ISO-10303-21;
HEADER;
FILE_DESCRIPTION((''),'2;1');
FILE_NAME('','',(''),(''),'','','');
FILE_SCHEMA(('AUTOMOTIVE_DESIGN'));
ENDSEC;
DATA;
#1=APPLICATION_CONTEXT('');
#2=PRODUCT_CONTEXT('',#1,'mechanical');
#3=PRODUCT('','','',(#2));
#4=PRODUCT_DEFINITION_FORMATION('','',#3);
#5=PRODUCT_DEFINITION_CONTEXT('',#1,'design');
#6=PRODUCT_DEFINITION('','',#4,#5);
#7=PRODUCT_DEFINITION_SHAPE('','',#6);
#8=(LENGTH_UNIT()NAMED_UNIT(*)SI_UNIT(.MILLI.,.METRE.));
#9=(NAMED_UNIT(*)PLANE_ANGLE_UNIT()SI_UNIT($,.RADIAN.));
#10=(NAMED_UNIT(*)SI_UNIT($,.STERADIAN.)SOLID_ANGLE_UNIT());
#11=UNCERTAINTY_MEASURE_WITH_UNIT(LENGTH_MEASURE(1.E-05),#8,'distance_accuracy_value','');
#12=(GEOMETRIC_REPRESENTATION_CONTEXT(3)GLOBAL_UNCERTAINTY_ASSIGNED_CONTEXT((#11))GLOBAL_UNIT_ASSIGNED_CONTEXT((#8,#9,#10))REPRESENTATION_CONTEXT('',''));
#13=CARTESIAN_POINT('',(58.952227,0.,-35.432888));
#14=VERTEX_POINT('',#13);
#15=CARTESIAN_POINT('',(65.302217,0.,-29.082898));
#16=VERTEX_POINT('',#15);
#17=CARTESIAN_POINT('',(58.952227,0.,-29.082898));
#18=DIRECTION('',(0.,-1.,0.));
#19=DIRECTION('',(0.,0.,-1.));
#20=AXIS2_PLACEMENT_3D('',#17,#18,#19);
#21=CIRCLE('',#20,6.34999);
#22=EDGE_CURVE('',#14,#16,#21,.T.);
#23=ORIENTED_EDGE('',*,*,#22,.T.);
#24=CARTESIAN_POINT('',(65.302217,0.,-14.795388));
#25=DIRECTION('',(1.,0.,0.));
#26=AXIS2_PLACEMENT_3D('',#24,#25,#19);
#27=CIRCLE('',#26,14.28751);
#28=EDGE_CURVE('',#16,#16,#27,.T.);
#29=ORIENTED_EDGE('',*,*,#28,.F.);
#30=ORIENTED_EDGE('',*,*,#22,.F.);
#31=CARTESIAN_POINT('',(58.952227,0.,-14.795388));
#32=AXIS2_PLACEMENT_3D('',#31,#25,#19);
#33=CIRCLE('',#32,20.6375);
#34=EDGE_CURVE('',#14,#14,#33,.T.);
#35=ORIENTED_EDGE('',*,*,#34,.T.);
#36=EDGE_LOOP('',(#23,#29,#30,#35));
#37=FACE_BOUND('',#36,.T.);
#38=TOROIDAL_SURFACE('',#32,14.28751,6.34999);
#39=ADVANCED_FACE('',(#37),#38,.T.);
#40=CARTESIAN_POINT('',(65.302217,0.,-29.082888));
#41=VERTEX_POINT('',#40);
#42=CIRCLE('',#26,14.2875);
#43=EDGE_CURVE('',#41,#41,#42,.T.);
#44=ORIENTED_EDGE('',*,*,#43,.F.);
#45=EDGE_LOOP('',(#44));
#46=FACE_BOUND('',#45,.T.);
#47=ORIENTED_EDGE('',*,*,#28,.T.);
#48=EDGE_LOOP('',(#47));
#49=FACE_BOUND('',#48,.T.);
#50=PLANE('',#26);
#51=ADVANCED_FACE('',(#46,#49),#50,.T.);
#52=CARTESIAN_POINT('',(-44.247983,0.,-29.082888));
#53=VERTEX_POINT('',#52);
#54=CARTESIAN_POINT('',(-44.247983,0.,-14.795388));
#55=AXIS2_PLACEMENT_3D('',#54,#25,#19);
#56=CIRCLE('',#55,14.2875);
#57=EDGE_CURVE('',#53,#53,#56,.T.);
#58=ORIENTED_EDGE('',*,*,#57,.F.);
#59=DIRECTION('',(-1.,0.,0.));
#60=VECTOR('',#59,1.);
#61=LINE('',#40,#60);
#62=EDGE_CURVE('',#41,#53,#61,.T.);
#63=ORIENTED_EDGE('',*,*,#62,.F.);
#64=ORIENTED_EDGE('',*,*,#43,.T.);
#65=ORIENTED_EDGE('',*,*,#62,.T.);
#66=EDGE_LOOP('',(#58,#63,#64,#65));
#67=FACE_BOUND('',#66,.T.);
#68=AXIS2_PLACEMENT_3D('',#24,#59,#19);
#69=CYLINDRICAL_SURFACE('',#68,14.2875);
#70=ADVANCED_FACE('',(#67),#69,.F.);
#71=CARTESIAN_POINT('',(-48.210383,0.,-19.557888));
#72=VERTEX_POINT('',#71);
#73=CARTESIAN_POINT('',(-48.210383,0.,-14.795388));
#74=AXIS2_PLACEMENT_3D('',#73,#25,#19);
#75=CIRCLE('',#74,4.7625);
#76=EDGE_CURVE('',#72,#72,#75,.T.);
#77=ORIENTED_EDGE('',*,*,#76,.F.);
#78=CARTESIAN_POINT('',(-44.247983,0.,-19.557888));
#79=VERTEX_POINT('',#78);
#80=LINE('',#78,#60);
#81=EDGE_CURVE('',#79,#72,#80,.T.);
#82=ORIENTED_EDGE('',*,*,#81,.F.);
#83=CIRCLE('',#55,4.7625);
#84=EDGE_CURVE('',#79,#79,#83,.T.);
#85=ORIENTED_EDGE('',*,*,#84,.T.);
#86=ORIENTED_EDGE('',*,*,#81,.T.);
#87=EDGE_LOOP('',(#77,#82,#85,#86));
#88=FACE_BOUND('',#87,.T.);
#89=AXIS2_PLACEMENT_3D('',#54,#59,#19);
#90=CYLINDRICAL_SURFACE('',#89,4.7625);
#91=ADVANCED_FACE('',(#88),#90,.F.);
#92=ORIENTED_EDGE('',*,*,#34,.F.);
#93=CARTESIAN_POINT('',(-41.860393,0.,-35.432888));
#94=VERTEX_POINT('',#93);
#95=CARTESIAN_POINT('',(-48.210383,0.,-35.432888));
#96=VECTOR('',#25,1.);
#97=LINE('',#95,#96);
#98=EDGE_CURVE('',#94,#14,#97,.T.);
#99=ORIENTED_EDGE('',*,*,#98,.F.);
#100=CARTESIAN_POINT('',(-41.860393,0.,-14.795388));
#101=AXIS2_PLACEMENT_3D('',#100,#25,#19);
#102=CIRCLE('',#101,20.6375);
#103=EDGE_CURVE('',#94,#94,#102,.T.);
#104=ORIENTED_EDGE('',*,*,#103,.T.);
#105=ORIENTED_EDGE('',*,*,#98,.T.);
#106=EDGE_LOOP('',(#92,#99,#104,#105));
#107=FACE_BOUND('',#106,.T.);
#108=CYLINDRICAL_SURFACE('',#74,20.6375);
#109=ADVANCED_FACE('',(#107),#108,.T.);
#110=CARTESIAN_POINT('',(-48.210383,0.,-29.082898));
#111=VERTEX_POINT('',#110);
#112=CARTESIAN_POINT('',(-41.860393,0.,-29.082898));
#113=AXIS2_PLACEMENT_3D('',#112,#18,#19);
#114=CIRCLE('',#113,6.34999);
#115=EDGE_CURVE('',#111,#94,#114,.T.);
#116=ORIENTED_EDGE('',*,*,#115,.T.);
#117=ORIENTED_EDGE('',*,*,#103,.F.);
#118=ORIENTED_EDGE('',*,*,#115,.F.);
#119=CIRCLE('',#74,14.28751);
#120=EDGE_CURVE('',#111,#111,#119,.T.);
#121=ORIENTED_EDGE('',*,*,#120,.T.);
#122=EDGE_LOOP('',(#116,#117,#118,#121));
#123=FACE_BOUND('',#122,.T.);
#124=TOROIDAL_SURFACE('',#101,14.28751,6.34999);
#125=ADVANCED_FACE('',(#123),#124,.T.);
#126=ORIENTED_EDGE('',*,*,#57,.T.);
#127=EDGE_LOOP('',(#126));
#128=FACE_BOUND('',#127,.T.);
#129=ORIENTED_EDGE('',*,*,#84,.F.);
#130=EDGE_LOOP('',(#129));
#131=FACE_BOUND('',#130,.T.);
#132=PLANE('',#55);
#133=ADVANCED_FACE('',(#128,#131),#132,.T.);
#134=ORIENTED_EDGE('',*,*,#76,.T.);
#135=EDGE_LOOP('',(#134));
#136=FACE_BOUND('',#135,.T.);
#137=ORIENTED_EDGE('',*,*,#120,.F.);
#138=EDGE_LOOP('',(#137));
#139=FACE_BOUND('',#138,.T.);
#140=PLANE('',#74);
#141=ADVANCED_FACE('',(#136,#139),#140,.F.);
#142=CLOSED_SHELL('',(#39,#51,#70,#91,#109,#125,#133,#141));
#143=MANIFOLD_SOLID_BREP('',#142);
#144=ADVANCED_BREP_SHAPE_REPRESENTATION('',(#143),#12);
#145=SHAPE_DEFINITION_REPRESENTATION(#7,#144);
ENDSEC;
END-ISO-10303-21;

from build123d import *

# Parameters (mm, degrees)
F2_R = 6.34999


# Not quite as in the source:
# - a fillet or chamfer is up to 0.001 mm smaller than in the source, because OpenCascade refuses the exact size


with BuildPart() as f1:
    # F0 (on Front) → F1 (revolve)
    with BuildSketch(Plane.XZ):
        Polygon((-48.2103834725, -19.5578883292), (-48.2103834725, -35.4328883292), (65.3022165275, -35.4328883292), (65.3022165275, -29.0828883292), (-44.2479834725, -29.0828883292), (-44.2479834725, -19.5578883292), align=None)
    revolve(axis=Axis((10.06000489, 0, -14.7953883292), (1, 0, 0)))

    # F2 (radius 6.35 in the source; OpenCascade refuses exactly that, so slightly less here)
    f2_edges = [f1.edges().sort_by_distance(p)[0] for p in [
        (-48.210383, 0, 5.842112),
        (65.302217, 0, 5.842112),
    ]]
    fillet(f2_edges, radius=F2_R)


solid = f1.part
